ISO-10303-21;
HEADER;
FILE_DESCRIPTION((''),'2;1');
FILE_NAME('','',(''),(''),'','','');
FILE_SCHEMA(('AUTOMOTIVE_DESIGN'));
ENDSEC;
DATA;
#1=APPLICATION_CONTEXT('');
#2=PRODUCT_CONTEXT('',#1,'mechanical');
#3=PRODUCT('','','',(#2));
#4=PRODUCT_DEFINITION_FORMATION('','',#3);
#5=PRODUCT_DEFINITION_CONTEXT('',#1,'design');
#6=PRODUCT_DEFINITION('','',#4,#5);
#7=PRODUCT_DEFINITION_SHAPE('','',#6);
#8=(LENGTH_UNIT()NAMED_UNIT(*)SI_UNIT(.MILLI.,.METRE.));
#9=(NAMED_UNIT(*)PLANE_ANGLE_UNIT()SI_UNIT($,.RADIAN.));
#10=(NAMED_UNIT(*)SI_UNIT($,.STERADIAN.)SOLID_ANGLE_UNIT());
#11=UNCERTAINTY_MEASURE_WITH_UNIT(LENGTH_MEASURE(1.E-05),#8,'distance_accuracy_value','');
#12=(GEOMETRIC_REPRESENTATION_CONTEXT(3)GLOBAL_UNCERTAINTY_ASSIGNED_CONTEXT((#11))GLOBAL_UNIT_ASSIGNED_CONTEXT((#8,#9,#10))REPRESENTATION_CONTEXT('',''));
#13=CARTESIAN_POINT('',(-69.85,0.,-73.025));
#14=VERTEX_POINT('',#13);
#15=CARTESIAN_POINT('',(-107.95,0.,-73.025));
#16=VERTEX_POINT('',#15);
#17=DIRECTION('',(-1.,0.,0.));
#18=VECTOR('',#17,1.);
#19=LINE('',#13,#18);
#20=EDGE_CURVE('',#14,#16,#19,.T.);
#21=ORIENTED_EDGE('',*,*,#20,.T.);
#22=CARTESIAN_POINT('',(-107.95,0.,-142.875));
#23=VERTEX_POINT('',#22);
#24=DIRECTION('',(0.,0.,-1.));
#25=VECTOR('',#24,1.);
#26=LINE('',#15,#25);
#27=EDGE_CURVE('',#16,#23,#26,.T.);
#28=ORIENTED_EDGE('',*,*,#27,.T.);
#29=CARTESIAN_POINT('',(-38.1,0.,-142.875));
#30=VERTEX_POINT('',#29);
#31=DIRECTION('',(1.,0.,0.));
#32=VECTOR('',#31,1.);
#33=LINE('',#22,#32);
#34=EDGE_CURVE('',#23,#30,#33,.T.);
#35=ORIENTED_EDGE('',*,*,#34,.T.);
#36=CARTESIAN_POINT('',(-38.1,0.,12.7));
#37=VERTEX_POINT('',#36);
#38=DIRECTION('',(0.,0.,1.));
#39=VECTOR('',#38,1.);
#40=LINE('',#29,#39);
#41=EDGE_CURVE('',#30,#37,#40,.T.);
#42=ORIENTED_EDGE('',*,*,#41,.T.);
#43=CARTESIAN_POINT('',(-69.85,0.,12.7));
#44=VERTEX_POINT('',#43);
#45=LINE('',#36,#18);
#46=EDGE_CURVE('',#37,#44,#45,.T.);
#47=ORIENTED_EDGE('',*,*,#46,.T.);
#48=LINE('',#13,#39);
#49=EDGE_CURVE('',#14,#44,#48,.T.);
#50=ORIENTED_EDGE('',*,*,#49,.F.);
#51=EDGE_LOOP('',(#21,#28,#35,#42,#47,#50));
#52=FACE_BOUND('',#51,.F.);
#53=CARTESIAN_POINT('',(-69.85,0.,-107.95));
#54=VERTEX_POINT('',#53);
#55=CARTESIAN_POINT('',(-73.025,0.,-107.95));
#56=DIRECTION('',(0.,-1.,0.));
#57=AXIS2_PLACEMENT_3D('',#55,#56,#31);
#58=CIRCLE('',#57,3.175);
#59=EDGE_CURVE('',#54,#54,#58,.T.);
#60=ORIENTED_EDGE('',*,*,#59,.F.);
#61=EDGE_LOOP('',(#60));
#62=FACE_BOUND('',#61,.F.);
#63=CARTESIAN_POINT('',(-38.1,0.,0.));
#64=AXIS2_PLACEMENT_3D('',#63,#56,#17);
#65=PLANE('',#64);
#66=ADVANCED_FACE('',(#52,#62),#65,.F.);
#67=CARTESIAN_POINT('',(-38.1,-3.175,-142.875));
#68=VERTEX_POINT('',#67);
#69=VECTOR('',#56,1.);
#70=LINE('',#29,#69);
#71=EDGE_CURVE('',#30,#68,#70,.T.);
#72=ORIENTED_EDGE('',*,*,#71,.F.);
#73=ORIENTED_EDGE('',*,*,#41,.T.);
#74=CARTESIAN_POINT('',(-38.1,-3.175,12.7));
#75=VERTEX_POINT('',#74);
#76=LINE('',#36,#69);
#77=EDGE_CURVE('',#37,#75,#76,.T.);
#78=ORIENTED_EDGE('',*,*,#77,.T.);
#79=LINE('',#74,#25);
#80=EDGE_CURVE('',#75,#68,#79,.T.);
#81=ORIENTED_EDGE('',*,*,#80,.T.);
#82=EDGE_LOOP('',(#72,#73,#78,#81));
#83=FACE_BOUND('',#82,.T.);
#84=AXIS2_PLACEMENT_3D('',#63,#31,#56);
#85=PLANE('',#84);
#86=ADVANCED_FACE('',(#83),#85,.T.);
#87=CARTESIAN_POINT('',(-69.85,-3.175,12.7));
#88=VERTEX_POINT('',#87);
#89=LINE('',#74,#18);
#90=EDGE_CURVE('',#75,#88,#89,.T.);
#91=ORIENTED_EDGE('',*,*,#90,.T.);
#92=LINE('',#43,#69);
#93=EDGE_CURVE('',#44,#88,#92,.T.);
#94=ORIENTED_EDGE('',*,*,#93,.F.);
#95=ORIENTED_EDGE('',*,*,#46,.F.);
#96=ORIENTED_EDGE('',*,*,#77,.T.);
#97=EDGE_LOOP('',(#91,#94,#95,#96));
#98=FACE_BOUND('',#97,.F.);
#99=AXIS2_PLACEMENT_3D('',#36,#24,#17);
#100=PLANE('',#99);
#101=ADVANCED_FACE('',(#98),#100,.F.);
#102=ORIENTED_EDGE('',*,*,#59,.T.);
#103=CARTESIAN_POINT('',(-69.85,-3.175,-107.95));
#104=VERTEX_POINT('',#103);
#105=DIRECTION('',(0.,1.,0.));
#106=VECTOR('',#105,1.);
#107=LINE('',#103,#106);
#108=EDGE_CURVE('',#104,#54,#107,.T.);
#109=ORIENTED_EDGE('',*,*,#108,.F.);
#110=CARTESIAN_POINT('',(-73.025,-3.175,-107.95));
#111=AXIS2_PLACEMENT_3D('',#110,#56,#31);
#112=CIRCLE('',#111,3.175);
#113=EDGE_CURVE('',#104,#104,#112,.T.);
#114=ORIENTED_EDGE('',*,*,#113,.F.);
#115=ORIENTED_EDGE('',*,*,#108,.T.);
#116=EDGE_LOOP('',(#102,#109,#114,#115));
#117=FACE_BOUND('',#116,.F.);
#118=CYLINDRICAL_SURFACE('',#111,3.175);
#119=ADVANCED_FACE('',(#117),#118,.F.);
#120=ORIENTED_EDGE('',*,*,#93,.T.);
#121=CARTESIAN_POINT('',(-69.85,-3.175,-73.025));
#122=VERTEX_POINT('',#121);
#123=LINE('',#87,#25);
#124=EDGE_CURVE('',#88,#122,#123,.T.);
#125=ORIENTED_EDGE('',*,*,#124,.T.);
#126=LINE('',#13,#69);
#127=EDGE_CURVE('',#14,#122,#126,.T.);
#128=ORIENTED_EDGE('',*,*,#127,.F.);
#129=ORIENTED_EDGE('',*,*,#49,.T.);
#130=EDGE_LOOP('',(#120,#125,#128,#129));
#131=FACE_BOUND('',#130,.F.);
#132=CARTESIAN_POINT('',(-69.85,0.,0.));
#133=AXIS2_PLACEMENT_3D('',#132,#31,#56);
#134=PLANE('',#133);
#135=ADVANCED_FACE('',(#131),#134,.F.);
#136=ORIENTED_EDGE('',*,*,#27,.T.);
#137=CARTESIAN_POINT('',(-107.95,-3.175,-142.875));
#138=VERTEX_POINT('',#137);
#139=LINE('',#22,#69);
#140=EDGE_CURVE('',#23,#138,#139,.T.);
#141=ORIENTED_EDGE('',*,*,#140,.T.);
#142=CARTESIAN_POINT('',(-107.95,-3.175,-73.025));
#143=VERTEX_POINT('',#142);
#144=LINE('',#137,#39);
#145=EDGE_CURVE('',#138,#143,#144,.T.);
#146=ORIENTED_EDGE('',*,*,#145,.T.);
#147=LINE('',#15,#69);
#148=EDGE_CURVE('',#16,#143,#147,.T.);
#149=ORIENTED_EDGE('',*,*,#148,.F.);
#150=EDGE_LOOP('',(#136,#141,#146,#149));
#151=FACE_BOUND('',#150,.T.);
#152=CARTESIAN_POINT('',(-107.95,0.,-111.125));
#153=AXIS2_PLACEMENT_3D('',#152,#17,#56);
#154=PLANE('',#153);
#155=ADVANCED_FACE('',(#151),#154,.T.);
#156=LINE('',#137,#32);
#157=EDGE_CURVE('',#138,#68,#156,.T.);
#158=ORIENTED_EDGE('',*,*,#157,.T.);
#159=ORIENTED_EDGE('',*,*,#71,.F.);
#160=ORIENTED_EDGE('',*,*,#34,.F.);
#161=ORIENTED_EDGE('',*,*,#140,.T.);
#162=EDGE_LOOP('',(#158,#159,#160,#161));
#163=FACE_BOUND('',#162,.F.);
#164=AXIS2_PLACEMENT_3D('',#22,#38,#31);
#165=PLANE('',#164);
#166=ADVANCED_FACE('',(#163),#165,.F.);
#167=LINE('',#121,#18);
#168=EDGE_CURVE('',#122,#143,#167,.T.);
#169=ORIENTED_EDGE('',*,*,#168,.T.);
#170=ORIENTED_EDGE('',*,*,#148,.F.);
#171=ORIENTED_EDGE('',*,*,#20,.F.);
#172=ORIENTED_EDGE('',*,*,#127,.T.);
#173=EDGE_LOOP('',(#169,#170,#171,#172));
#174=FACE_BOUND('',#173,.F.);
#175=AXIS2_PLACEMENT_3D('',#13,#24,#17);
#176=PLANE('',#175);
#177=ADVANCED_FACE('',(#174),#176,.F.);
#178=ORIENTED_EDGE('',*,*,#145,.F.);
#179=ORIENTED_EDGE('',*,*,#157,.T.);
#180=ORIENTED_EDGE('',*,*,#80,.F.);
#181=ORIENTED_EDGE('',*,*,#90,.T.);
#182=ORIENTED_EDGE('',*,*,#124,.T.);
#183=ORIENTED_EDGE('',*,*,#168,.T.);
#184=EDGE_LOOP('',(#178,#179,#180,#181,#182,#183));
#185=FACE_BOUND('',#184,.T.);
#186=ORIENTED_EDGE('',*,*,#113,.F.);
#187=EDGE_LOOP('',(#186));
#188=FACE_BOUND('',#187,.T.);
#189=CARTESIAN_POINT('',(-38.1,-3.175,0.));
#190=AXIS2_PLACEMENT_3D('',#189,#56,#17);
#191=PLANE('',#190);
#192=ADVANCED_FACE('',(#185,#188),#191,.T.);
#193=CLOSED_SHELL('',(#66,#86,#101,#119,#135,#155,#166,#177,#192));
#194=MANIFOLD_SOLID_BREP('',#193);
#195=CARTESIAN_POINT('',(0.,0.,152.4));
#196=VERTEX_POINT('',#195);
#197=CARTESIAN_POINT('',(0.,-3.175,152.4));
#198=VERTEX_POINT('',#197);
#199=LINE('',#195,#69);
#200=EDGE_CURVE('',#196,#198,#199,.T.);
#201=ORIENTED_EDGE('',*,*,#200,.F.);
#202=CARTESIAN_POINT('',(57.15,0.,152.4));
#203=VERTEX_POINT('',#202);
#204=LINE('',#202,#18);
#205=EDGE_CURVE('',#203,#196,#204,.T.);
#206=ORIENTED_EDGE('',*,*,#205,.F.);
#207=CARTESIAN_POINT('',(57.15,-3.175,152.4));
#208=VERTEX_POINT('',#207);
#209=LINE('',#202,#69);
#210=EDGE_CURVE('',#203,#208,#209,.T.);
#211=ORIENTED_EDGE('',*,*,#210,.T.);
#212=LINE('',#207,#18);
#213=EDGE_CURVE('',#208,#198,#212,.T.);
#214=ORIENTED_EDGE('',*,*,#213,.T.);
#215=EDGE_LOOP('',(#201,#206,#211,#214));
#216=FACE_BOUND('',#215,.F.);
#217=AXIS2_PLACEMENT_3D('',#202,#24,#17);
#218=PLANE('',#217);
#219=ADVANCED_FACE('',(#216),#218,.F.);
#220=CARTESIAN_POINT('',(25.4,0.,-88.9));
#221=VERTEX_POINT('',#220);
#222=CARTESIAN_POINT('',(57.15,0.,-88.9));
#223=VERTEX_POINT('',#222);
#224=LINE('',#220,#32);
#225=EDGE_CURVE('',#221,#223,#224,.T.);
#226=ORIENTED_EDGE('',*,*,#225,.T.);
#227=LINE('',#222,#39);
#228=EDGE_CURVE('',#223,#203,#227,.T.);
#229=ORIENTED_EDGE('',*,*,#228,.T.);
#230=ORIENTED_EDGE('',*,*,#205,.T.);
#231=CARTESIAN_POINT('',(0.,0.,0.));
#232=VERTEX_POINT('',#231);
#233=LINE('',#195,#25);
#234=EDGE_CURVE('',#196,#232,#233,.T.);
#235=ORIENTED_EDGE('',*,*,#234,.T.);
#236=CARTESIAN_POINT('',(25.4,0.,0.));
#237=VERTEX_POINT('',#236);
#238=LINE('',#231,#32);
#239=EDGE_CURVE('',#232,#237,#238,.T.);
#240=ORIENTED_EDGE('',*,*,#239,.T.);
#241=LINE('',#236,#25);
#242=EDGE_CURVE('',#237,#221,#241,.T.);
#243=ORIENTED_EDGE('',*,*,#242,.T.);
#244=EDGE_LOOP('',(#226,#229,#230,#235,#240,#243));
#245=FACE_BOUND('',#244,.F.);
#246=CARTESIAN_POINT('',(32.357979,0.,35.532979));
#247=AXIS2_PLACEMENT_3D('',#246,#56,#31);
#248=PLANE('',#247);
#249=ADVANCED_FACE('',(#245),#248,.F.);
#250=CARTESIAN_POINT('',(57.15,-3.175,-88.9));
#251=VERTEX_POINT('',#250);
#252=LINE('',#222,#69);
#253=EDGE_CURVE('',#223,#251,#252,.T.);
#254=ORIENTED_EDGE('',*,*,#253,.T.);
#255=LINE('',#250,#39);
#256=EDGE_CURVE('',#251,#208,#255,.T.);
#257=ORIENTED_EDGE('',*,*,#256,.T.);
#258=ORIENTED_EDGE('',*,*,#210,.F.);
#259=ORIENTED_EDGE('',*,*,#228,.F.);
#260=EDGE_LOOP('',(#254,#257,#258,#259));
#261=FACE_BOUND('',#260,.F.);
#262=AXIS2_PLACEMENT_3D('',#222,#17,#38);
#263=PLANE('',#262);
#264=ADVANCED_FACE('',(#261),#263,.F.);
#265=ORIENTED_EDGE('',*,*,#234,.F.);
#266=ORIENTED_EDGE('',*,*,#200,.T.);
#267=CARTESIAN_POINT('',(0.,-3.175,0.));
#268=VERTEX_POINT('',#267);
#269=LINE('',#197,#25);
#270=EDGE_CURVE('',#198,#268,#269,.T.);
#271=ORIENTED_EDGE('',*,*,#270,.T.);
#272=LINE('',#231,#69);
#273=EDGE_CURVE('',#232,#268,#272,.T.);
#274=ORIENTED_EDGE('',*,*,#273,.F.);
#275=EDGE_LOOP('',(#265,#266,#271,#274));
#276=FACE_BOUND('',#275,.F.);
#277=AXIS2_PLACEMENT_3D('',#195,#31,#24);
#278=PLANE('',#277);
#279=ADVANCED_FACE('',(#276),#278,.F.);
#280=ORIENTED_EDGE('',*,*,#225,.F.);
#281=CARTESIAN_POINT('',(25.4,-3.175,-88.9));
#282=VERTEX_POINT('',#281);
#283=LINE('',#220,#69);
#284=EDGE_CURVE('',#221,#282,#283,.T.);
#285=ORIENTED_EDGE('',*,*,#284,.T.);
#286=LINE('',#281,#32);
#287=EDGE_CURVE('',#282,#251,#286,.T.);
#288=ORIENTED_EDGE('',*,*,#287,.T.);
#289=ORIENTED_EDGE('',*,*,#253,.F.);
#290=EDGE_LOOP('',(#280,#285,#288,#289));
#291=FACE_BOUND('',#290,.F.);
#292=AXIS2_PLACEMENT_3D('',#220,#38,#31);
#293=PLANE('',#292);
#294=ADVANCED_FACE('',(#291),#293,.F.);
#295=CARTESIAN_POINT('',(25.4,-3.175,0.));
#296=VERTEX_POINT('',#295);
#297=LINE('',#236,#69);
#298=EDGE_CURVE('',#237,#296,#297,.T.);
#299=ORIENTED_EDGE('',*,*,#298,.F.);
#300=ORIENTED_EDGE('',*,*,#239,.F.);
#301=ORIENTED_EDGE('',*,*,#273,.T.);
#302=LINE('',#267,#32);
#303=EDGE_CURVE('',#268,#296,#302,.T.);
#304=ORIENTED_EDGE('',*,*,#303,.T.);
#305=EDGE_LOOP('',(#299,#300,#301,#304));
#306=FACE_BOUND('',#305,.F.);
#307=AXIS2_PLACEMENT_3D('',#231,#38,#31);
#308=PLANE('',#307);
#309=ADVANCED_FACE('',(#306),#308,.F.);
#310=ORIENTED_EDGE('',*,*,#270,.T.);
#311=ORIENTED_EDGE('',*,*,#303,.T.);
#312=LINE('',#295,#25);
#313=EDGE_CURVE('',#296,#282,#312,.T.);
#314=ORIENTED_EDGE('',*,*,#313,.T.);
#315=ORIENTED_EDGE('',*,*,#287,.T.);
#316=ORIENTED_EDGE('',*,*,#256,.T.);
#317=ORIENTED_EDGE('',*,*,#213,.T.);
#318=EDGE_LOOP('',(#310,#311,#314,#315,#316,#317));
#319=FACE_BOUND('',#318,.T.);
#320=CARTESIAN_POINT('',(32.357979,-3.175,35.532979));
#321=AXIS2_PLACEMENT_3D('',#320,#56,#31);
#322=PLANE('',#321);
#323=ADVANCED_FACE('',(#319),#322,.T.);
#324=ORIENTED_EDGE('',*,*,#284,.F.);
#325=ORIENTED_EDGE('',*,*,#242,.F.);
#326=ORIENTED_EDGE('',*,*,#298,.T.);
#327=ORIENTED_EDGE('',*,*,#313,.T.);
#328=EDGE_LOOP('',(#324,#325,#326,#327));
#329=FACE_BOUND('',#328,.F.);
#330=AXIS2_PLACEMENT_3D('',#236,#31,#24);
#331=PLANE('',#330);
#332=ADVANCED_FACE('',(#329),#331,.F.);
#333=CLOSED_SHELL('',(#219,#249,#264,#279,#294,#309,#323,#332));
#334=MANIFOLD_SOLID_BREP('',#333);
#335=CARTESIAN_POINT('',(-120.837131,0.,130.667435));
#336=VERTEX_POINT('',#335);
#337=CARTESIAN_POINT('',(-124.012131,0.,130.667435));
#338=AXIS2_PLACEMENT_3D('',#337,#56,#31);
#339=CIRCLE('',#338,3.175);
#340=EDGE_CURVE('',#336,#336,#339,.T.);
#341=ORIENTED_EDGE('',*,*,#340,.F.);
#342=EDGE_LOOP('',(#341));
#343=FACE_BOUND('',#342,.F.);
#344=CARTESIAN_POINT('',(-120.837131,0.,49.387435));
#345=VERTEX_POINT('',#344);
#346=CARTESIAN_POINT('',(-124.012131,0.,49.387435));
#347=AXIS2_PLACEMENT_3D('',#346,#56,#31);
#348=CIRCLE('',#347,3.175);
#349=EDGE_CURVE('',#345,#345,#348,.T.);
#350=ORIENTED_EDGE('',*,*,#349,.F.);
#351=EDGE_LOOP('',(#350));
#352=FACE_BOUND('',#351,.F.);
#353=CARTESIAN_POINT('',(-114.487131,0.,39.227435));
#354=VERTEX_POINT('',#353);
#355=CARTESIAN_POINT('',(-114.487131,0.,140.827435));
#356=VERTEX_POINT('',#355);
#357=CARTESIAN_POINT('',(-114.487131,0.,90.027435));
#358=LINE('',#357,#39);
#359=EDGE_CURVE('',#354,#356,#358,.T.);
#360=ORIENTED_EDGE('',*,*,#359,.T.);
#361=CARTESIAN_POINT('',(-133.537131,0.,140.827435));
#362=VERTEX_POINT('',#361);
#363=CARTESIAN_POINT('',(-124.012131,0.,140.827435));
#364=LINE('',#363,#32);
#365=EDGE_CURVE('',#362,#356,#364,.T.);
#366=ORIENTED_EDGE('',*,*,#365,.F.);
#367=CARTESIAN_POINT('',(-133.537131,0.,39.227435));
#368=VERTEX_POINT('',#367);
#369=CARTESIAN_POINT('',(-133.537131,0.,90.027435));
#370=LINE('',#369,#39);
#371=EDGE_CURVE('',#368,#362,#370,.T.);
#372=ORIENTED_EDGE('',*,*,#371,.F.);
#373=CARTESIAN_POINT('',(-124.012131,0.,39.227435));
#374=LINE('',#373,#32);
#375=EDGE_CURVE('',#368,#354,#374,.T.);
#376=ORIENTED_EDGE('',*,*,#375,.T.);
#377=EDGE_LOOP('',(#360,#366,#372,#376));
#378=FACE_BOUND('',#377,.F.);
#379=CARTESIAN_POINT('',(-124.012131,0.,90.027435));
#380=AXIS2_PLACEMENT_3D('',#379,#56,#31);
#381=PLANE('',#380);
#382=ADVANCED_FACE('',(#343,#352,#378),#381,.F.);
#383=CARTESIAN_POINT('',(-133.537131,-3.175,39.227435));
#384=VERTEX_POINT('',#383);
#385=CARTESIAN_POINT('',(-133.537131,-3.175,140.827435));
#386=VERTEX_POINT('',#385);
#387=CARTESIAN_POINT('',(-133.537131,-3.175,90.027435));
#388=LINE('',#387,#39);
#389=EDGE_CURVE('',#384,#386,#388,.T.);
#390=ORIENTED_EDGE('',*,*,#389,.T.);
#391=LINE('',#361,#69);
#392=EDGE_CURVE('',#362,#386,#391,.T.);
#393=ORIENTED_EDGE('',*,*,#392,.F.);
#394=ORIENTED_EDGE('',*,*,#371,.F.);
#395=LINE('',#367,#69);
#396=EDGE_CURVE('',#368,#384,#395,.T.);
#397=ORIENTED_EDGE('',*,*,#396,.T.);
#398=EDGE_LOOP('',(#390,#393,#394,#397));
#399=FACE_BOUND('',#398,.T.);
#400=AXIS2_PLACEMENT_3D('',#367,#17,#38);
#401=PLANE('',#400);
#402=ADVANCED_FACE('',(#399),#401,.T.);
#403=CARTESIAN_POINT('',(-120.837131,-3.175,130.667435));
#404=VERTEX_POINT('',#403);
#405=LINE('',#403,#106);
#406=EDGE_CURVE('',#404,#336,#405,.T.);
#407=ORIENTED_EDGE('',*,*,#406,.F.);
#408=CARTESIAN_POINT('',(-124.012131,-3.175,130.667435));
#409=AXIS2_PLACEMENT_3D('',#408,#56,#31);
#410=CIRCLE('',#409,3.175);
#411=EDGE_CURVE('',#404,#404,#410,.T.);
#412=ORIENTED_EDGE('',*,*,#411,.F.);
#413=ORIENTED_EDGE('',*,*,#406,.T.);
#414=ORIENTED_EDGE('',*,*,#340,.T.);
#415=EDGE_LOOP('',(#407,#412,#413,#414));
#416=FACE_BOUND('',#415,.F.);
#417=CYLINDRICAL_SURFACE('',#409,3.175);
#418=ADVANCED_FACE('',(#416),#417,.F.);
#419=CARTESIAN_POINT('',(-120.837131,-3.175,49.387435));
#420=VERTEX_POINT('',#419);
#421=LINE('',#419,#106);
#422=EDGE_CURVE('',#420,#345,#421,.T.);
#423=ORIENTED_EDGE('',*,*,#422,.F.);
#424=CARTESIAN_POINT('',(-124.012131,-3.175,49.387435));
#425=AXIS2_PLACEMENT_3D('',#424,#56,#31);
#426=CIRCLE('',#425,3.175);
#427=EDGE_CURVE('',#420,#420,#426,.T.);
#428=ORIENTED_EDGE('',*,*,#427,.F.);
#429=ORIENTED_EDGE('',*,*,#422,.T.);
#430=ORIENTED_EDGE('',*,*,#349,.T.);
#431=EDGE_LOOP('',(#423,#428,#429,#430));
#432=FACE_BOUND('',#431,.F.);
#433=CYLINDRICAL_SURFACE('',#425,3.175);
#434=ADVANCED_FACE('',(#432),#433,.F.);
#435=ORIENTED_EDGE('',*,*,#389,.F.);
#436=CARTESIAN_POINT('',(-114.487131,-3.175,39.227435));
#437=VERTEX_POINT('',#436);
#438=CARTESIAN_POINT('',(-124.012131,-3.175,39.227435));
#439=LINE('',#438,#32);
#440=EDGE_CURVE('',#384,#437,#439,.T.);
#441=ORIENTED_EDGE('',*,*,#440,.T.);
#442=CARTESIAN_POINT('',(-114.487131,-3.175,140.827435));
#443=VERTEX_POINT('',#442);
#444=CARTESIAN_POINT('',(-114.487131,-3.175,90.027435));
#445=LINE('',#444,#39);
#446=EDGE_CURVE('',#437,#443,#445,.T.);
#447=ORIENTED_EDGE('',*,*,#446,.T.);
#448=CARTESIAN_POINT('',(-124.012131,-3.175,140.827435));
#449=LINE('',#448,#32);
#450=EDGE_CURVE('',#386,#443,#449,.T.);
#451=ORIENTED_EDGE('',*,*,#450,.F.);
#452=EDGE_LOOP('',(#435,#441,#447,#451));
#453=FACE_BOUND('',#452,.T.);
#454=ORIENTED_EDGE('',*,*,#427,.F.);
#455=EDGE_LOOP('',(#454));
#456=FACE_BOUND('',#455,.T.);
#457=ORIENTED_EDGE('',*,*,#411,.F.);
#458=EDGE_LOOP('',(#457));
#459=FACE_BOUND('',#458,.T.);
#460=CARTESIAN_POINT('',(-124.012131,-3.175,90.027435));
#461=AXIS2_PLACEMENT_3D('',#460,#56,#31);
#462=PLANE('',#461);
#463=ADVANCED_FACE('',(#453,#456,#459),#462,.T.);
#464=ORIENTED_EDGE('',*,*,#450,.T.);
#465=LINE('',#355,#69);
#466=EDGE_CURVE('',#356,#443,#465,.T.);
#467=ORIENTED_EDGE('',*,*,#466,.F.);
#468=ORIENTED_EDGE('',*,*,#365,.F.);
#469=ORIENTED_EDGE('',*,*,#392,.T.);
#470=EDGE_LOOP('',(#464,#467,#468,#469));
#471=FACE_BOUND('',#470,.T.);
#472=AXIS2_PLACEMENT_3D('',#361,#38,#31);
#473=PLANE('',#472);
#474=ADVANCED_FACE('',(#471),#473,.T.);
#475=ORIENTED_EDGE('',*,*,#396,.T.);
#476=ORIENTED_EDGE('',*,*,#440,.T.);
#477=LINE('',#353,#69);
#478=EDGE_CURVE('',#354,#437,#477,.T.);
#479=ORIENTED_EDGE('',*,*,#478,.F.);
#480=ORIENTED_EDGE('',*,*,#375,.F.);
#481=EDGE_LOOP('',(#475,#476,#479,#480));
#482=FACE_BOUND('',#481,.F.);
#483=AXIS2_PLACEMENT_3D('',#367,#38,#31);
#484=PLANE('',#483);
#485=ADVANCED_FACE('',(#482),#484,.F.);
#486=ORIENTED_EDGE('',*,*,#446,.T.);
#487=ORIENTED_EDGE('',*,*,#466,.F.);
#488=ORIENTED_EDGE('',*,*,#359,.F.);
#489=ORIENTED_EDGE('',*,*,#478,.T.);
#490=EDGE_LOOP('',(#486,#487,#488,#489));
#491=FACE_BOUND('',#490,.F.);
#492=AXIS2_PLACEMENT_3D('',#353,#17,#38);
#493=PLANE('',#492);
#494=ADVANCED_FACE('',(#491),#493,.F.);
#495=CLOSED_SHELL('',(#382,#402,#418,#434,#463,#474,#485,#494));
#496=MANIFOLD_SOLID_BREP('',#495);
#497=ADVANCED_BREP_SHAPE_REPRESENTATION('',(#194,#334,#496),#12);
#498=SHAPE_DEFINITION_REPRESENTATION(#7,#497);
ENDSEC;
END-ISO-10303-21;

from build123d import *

# Parameters (mm, degrees)
F1_DEPTH  = 3.175
F3_DEPTH  = 3.175
F4_DEPTH  = 31.75
F5_DEPTH  = 12.7
F6_R      = 3.175
F7_DEPTH  = 25.4
F8_W      = 19.05
F8_H      = 101.6
F9_DEPTH  = 3.175
F10_R     = 3.175
F11_DEPTH = 25.4


with BuildPart() as f1:
    # F0 (on Front) → F1 (new body)
    with BuildSketch(Plane.XZ):
        Polygon((57.15, 152.4), (0, 152.4), (0, 0), (25.4, 0), (25.4, -88.9), (57.15, -88.9), (57.15, 0), align=None)
    extrude(amount=F1_DEPTH)


with BuildPart() as f3:
    # F2 (on Front) → F3 (new body)
    with BuildSketch(Plane.XZ):
        Polygon((-38.1, 0), (-69.85, 0), (-69.85, -73.025), (-107.95, -73.025), (-107.95, -111.125), (-69.85, -111.125), (-38.1, -111.125), (-38.1, -73.025), align=None)
    extrude(amount=F3_DEPTH)

    # F4 (add): a face of the model
    f4_faces = [f3.faces().sort_by_distance(p)[0] for p in [
        (-73.025, -1.5875, -111.125),
    ]]
    extrude(f4_faces, amount=F4_DEPTH)

    # F5 (add): a face of the model
    f5_faces = [f3.faces().sort_by_distance(p)[0] for p in [
        (-53.975, -1.5875, 0),
    ]]
    extrude(f5_faces, amount=F5_DEPTH)

    # F6 (on face) → F7 (cut)
    with BuildSketch(Plane.XZ.offset(3.175)):
        with Locations((-73.025, -107.95)):
            Circle(F6_R)
    extrude(amount=-F7_DEPTH, mode=Mode.SUBTRACT)


with BuildPart() as f9:
    # F8 (on Front) → F9 (new body)
    with BuildSketch(Plane.XZ):
        with Locations((-124.0121312439, 90.0274350342)):
            Rectangle(F8_W, F8_H)
    extrude(amount=F9_DEPTH)

    # F10 (on face) → F11 (cut)
    with BuildSketch(Plane.XZ.offset(3.175)):
        with Locations((-124.0121312439, 130.6674350342)):
            Circle(F10_R)
        with Locations((-124.0121312439, 49.3874350342)):
            Circle(F10_R)
    extrude(amount=-F11_DEPTH, mode=Mode.SUBTRACT)


solid = Compound([f1.part, f3.part, f9.part])
